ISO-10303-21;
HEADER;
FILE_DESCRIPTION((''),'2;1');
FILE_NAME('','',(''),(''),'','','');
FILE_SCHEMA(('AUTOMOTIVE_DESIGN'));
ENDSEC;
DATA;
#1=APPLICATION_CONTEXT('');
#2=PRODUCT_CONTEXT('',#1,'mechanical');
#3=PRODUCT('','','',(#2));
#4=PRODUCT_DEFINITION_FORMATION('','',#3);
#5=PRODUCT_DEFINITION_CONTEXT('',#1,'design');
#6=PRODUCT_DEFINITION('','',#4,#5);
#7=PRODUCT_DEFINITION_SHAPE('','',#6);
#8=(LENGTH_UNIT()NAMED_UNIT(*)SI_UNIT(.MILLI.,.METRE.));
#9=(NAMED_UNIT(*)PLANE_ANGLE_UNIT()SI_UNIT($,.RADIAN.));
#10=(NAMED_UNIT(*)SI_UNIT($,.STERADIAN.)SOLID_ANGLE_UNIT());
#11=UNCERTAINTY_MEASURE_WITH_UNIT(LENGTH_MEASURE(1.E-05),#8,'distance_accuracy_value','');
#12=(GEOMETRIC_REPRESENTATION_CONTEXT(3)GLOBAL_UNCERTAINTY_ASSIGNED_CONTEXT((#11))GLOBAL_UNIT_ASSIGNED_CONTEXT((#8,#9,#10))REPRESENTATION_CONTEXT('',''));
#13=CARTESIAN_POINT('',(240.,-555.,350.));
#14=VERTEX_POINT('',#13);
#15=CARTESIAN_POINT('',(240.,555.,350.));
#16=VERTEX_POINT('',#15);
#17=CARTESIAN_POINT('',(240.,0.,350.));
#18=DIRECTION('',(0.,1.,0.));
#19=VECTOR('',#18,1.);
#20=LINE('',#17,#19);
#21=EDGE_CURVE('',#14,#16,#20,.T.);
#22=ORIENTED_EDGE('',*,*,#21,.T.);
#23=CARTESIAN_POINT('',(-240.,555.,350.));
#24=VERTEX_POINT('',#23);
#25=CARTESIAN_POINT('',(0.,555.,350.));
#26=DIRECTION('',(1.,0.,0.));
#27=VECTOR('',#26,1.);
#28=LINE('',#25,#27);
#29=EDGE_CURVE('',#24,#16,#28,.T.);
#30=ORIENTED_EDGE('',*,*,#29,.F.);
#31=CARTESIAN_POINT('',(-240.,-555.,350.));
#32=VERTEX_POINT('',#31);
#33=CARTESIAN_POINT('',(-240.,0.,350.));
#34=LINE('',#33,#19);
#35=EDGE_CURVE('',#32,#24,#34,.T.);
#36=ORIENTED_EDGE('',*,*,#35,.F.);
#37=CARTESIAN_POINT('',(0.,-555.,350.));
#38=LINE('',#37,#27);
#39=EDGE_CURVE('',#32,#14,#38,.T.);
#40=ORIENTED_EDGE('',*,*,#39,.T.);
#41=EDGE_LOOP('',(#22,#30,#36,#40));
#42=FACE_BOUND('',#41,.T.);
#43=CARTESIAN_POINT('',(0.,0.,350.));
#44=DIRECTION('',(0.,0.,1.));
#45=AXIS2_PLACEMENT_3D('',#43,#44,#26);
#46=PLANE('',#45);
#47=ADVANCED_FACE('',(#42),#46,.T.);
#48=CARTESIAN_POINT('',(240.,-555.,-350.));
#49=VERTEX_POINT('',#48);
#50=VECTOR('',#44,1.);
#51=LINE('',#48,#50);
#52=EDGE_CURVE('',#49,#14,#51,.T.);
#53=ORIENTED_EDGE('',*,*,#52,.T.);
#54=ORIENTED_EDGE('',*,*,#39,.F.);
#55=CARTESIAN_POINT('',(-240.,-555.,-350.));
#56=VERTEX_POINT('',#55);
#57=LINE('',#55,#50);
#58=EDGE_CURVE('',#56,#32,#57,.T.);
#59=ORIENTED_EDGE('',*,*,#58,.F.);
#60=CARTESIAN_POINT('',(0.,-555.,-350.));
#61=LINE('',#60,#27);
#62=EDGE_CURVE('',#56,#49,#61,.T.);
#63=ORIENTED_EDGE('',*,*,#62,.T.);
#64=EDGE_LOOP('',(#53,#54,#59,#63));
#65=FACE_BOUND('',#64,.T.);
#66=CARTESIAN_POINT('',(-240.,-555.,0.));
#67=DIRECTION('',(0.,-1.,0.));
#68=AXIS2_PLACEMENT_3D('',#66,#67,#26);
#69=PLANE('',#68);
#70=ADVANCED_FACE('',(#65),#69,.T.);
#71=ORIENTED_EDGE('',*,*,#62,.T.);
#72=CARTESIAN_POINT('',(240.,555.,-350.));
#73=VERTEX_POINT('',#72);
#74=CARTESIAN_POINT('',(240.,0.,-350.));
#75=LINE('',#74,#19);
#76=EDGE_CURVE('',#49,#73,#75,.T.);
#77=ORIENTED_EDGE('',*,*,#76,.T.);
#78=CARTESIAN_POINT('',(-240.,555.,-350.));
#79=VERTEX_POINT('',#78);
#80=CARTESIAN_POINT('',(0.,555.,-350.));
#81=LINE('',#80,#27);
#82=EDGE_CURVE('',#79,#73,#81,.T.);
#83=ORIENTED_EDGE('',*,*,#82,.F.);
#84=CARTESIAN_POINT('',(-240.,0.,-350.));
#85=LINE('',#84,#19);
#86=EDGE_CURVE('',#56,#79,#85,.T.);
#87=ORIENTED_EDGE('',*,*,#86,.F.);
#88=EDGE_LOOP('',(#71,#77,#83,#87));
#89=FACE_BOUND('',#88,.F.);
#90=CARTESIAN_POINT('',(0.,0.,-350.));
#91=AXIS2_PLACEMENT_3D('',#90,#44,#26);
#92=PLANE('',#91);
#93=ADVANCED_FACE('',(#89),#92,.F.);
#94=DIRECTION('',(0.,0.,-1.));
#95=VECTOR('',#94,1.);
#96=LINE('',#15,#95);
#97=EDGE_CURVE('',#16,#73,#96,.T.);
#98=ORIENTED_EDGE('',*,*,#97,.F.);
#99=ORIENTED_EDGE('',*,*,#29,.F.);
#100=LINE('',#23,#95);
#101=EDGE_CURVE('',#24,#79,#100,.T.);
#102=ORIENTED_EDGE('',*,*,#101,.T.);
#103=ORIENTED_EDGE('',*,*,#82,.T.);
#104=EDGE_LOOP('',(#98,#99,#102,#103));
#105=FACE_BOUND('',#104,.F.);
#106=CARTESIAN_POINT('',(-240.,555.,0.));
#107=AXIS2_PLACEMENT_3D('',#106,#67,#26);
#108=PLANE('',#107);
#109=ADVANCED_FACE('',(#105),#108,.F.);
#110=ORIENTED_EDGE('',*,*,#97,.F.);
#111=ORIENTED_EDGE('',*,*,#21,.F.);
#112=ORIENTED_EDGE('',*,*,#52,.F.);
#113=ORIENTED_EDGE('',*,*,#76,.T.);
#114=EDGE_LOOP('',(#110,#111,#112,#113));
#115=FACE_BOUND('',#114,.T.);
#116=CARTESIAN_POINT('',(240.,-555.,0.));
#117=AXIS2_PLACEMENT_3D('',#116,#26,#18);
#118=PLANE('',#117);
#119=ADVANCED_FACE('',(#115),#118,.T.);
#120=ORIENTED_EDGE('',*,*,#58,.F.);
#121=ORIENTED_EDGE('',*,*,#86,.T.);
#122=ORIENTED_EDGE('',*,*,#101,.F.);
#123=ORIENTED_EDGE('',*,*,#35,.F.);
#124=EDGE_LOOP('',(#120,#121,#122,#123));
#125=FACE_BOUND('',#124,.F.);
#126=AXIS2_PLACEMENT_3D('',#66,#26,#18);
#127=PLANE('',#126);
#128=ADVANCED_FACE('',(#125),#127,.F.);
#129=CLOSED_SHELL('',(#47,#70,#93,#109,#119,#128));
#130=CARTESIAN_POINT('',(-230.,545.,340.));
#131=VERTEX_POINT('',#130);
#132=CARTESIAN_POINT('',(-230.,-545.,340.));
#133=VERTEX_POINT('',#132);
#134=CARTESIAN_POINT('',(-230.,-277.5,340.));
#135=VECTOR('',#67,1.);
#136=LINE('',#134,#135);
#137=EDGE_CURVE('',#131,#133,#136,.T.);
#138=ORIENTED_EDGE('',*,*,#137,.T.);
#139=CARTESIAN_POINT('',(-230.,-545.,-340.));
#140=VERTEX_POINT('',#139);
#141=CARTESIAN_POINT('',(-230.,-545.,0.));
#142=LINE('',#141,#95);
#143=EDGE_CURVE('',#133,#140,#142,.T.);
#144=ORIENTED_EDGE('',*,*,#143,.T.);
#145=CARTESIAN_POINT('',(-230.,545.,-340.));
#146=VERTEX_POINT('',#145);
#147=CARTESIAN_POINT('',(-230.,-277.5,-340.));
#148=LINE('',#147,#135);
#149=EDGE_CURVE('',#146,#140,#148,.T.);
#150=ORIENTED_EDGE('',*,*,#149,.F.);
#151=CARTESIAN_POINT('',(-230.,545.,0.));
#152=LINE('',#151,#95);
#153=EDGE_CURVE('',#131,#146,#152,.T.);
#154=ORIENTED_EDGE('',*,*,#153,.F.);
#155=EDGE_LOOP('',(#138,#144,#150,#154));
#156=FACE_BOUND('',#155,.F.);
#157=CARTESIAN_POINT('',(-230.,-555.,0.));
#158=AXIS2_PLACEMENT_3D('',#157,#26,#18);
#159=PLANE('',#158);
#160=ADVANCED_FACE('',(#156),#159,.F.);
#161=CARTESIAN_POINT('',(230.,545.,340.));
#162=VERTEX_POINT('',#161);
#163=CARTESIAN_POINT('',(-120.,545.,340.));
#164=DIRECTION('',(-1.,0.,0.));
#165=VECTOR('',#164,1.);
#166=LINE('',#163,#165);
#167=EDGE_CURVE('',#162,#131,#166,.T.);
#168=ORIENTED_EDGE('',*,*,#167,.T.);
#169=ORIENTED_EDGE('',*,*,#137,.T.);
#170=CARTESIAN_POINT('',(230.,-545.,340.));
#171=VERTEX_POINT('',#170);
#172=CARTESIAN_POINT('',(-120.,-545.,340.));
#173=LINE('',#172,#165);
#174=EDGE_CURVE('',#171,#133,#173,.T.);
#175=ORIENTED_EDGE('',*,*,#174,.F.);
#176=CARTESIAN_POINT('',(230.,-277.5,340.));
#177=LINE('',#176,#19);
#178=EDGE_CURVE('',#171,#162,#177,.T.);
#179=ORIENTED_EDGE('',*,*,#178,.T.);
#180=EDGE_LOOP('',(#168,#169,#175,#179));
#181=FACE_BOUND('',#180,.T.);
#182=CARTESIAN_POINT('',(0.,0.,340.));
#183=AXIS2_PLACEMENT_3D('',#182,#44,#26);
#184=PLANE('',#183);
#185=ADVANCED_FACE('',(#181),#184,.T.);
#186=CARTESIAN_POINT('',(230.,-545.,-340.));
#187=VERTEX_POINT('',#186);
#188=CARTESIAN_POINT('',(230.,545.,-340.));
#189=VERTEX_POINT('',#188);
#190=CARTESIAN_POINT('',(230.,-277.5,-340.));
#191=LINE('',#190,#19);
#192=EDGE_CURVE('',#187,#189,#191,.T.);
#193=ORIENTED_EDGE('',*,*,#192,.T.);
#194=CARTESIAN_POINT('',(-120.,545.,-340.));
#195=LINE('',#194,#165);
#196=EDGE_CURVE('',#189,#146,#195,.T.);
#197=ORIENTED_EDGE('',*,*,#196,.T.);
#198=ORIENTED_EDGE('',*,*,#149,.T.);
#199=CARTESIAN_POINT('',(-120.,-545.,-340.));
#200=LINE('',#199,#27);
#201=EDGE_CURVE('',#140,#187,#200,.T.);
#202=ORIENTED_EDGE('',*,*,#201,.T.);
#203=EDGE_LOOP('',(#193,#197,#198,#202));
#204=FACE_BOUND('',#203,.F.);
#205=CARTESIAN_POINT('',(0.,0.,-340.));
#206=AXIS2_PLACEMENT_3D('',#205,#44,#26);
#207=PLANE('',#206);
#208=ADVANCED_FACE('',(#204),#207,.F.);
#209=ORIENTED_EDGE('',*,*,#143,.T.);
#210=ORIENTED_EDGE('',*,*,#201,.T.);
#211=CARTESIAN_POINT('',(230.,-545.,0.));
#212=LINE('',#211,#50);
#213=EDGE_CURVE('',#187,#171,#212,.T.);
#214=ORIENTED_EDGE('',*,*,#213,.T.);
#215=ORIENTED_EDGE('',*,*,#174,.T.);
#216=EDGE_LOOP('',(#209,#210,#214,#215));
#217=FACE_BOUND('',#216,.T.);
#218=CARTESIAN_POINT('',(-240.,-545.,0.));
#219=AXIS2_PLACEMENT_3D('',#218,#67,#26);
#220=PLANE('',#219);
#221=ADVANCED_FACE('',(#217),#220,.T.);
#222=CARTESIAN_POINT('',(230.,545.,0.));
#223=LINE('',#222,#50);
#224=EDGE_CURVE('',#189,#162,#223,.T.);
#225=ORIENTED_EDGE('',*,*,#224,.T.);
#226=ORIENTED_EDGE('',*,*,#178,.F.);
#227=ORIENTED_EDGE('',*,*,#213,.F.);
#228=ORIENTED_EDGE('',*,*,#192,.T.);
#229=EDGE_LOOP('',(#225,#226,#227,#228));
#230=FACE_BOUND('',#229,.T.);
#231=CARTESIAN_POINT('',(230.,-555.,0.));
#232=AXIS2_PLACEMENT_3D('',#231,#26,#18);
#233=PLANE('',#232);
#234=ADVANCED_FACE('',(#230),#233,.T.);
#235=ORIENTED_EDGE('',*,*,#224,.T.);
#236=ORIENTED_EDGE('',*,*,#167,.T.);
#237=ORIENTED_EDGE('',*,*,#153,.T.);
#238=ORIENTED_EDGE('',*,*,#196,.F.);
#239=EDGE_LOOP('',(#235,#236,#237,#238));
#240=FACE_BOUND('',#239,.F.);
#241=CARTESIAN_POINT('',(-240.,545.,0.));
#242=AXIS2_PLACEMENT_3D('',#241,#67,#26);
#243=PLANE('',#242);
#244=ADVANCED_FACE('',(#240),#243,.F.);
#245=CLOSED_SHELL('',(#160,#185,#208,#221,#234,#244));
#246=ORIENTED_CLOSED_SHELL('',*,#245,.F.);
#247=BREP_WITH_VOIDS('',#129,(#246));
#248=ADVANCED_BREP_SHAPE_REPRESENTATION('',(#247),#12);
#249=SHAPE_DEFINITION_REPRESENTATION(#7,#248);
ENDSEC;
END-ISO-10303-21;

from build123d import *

# Parameters (mm, degrees)
F0_W     = 480
F0_H     = 1110
F1_DEPTH = 350
F2_T     = -10


# Not quite as in the source:
# - the program builds the solid bodies; features that only make, move or delete a surface that nothing else refers to are left out


with BuildPart() as f1:
    # F0 (on Top) → F1 (new body, symmetric)
    with BuildSketch(Plane.XY):
        Rectangle(F0_W, F0_H)
    extrude(amount=F1_DEPTH, both=True)

    # F2 (hollow: no face is removed)
    offset(amount=F2_T, mode=Mode.SUBTRACT)


solid = f1.part
